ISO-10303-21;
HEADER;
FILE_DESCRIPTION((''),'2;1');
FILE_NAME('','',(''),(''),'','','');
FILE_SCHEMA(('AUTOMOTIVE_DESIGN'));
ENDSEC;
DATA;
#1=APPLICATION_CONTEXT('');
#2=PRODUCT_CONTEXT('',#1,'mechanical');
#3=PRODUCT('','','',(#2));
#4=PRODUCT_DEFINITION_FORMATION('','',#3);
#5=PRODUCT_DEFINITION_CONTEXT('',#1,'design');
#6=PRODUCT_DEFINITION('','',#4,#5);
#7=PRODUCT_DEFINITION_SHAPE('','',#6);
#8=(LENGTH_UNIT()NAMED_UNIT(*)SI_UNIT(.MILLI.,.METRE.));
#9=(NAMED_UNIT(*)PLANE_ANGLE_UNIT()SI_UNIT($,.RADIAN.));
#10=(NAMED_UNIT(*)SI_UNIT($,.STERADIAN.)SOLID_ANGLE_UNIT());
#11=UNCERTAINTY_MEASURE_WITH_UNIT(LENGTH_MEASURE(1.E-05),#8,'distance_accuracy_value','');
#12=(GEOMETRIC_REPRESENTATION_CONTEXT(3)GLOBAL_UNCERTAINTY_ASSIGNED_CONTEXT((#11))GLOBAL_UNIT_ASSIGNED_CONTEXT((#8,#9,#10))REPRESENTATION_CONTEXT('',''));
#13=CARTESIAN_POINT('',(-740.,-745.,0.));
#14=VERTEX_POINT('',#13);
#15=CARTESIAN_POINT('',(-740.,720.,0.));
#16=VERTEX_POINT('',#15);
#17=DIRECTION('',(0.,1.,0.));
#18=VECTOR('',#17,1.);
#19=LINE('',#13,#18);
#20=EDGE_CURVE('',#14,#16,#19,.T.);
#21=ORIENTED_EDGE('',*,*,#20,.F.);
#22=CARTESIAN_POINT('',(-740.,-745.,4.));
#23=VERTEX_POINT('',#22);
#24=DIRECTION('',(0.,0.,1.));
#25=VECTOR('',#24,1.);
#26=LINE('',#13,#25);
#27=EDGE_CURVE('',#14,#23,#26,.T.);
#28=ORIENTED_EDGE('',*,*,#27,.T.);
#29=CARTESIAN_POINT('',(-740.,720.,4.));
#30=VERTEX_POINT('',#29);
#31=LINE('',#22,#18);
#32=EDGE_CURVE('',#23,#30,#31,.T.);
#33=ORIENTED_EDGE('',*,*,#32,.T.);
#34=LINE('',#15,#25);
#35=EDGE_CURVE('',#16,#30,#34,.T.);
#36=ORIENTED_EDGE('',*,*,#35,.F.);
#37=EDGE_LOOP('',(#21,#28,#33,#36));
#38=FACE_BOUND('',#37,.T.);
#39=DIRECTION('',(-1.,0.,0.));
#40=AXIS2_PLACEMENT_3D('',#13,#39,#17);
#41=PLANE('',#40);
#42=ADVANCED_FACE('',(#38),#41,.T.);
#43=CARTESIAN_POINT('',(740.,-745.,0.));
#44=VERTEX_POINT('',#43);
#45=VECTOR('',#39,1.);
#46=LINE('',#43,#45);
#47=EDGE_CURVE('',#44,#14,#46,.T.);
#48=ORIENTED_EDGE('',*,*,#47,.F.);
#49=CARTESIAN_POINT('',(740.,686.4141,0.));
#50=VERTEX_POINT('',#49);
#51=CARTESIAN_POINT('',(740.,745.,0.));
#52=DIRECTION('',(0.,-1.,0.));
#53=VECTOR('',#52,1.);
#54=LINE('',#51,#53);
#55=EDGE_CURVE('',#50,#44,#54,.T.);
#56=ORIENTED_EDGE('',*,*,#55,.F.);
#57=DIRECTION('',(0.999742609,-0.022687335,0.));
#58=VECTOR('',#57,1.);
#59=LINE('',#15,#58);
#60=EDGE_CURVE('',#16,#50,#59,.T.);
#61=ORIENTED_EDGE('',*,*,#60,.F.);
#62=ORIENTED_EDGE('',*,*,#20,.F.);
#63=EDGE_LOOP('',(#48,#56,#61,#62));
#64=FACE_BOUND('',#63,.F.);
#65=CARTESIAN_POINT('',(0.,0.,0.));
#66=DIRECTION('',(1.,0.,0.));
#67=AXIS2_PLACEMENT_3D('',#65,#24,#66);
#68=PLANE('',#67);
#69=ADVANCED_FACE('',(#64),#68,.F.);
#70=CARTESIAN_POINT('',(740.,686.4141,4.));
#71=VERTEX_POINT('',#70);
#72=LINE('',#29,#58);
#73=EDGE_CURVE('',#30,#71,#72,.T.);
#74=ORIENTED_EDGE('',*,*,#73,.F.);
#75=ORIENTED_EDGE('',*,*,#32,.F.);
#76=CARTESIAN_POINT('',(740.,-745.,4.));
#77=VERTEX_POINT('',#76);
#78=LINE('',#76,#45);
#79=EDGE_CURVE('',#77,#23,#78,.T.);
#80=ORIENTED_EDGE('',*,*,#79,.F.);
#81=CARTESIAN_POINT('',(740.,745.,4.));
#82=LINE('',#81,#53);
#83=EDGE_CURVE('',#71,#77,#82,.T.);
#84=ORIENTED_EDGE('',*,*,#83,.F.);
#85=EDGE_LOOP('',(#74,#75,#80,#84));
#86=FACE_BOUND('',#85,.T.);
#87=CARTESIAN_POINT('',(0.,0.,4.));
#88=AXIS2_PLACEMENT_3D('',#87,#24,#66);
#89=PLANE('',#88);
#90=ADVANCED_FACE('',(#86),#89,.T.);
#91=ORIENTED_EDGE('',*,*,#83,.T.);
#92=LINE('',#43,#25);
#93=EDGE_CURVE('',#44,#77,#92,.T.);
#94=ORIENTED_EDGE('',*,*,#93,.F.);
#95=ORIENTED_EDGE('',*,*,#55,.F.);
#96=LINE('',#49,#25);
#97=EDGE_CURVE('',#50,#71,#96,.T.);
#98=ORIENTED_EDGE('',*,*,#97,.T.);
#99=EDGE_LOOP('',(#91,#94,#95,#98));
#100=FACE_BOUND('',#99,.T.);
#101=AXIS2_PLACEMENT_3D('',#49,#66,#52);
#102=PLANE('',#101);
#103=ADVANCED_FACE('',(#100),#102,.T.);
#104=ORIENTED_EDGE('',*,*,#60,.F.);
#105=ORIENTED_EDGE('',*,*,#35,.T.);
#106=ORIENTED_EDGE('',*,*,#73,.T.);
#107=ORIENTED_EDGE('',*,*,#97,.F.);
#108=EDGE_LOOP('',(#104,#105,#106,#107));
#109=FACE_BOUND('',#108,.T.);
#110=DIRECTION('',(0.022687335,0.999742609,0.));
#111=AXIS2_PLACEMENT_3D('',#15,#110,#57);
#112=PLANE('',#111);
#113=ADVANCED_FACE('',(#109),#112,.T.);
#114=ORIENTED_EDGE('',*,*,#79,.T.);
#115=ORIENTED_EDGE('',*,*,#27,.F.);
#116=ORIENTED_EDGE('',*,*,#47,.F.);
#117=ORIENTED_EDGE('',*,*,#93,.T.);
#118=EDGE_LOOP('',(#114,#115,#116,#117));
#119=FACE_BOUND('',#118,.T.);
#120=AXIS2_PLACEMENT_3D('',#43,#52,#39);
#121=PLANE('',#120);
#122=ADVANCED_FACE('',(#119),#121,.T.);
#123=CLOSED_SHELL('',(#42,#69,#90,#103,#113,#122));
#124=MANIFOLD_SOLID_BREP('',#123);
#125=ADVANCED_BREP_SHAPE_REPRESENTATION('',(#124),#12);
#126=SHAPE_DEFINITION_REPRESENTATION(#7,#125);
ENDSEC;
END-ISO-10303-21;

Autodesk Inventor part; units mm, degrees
ref_plane "YZ Plane" through (0, 0, 0) normal (1, 0, 0) x (0, 1, 0)
ref_plane "XZ Plane" through (0, 0, 0) normal (0, 1, 0) x (-1, 0, 0)
ref_plane "XY Plane" through (0, 0, 0) normal (0, 0, 1) x (1, 0, 0)
sketch "Sketch1" plane through (0, 0, 0) normal (0, 0, 1) x (1, 0, 0)
  line L0 (740, -745) -> (-740, -745)
  line L1 (-740, -745) -> (-740, 745)
  line L2 (-740, 745) -> (740, 745)
  line L3 (740, 745) -> (740, -745)
  line L4 (740, -745) -> (-740, 745) construction
  line L5 (-740, -745) -> (740, 745) construction
  line L6 (-740, 720) -> (740, 686.4141)
  point P0 (0, 0)
  dimension "d0" = 1480
  dimension "d1" = 1490
  dimension "d9" = 25
  dimension "d10" = 1.3
extrude "Plate1" add sketch "Sketch1" along normal blind 4 contours L0 L1 L6 L3
sketch "Эскиз2" plane through (0, 0, 0) normal (0, 0, -1) x (-1, 0, 0)
  line L0 (582.7476, -597.0649) -> (582.7476, -1095.2011) construction
  line L1 (582.7476, -1095.2011) -> (543.1204, -1095.2011) construction
  line L2 (543.1204, -1095.2011) -> (543.1204, -597.0649) construction
  line L3 (543.1204, -597.0649) -> (582.7476, -597.0649) construction
  line L4 (209.3586, -493) -> (209.3586, -590) projected
  line L5 (209.3586, -590) -> (205.3586, -590) projected
  line L6 (-290.5105, -493) -> (-290.5105, -590) projected
  line L7 (-290.5105, -590) -> (-294.5105, -590) projected
  line L8 (-290.5105, 715) -> (-290.5105, 775) projected
  line L9 (-290.5105, 715) -> (-294.5105, 715) projected
  line L10 (209.3586, 715) -> (209.3586, 775) projected
  line L11 (209.3586, 715) -> (205.3586, 715) projected
  line L12 (669.6308, -489.5) -> (669.6308, -485.5) projected
  line L13 (669.6308, 7.1667) -> (669.6308, 11.1667) projected
  line L14 (669.6308, 503.8333) -> (669.6308, 507.8333) projected
  line L15 (-740, -489.5) -> (-710, -489.5) projected
  line L16 (-710, -489.5) -> (-710, -485.5) projected
  line L17 (-740, 7.1667) -> (-710, 7.1667) projected
  line L18 (-710, 7.1667) -> (-710, 11.1667) projected
  line L19 (-740, 503.8333) -> (-710, 503.8333) projected
  line L20 (-710, 503.8333) -> (-710, 507.8333) projected
  line L21 (669.6308, 503.8333) -> (639.6308, 503.8333)
  line L22 (739.6246, 7.1667) -> (709.6246, 7.1667)
  line L23 (739.6246, -489.5) -> (709.6246, -489.5)
  point P0 (0, 0)
  dimension "d6" = 30
  dimension "d7" = 30
  dimension "d8" = 30
mark "Маркировка1"
equation "\"d0\" = Лист_ширина"
equation "\"d1\" = 0.5 * Лист_длина"
equation "\"d2\" = Thickness"
equation "\"BendRadius\" = Thickness"
equation "\"BendReliefWidth\" = Thickness"
equation "\"BendReliefDepth\" = 0.5 * Thickness"
equation "\"CornerReliefSize\" = 4 * Thickness"
equation "\"MinimumRemnant\" = 2 * Thickness"
equation "\"TransitionRadius\" = BendRadius"
equation "\"JacobiRadiusSize\" = BendRadius"
equation "\"GapSize\" = Thickness"
equation "\"Лист_ширина\" = 1480"
equation "\"Лист_длина\" = 2980"
equation "\"Thickness\" = 4"
properties part number "GBK 3339 shield 9" material "Steel"
